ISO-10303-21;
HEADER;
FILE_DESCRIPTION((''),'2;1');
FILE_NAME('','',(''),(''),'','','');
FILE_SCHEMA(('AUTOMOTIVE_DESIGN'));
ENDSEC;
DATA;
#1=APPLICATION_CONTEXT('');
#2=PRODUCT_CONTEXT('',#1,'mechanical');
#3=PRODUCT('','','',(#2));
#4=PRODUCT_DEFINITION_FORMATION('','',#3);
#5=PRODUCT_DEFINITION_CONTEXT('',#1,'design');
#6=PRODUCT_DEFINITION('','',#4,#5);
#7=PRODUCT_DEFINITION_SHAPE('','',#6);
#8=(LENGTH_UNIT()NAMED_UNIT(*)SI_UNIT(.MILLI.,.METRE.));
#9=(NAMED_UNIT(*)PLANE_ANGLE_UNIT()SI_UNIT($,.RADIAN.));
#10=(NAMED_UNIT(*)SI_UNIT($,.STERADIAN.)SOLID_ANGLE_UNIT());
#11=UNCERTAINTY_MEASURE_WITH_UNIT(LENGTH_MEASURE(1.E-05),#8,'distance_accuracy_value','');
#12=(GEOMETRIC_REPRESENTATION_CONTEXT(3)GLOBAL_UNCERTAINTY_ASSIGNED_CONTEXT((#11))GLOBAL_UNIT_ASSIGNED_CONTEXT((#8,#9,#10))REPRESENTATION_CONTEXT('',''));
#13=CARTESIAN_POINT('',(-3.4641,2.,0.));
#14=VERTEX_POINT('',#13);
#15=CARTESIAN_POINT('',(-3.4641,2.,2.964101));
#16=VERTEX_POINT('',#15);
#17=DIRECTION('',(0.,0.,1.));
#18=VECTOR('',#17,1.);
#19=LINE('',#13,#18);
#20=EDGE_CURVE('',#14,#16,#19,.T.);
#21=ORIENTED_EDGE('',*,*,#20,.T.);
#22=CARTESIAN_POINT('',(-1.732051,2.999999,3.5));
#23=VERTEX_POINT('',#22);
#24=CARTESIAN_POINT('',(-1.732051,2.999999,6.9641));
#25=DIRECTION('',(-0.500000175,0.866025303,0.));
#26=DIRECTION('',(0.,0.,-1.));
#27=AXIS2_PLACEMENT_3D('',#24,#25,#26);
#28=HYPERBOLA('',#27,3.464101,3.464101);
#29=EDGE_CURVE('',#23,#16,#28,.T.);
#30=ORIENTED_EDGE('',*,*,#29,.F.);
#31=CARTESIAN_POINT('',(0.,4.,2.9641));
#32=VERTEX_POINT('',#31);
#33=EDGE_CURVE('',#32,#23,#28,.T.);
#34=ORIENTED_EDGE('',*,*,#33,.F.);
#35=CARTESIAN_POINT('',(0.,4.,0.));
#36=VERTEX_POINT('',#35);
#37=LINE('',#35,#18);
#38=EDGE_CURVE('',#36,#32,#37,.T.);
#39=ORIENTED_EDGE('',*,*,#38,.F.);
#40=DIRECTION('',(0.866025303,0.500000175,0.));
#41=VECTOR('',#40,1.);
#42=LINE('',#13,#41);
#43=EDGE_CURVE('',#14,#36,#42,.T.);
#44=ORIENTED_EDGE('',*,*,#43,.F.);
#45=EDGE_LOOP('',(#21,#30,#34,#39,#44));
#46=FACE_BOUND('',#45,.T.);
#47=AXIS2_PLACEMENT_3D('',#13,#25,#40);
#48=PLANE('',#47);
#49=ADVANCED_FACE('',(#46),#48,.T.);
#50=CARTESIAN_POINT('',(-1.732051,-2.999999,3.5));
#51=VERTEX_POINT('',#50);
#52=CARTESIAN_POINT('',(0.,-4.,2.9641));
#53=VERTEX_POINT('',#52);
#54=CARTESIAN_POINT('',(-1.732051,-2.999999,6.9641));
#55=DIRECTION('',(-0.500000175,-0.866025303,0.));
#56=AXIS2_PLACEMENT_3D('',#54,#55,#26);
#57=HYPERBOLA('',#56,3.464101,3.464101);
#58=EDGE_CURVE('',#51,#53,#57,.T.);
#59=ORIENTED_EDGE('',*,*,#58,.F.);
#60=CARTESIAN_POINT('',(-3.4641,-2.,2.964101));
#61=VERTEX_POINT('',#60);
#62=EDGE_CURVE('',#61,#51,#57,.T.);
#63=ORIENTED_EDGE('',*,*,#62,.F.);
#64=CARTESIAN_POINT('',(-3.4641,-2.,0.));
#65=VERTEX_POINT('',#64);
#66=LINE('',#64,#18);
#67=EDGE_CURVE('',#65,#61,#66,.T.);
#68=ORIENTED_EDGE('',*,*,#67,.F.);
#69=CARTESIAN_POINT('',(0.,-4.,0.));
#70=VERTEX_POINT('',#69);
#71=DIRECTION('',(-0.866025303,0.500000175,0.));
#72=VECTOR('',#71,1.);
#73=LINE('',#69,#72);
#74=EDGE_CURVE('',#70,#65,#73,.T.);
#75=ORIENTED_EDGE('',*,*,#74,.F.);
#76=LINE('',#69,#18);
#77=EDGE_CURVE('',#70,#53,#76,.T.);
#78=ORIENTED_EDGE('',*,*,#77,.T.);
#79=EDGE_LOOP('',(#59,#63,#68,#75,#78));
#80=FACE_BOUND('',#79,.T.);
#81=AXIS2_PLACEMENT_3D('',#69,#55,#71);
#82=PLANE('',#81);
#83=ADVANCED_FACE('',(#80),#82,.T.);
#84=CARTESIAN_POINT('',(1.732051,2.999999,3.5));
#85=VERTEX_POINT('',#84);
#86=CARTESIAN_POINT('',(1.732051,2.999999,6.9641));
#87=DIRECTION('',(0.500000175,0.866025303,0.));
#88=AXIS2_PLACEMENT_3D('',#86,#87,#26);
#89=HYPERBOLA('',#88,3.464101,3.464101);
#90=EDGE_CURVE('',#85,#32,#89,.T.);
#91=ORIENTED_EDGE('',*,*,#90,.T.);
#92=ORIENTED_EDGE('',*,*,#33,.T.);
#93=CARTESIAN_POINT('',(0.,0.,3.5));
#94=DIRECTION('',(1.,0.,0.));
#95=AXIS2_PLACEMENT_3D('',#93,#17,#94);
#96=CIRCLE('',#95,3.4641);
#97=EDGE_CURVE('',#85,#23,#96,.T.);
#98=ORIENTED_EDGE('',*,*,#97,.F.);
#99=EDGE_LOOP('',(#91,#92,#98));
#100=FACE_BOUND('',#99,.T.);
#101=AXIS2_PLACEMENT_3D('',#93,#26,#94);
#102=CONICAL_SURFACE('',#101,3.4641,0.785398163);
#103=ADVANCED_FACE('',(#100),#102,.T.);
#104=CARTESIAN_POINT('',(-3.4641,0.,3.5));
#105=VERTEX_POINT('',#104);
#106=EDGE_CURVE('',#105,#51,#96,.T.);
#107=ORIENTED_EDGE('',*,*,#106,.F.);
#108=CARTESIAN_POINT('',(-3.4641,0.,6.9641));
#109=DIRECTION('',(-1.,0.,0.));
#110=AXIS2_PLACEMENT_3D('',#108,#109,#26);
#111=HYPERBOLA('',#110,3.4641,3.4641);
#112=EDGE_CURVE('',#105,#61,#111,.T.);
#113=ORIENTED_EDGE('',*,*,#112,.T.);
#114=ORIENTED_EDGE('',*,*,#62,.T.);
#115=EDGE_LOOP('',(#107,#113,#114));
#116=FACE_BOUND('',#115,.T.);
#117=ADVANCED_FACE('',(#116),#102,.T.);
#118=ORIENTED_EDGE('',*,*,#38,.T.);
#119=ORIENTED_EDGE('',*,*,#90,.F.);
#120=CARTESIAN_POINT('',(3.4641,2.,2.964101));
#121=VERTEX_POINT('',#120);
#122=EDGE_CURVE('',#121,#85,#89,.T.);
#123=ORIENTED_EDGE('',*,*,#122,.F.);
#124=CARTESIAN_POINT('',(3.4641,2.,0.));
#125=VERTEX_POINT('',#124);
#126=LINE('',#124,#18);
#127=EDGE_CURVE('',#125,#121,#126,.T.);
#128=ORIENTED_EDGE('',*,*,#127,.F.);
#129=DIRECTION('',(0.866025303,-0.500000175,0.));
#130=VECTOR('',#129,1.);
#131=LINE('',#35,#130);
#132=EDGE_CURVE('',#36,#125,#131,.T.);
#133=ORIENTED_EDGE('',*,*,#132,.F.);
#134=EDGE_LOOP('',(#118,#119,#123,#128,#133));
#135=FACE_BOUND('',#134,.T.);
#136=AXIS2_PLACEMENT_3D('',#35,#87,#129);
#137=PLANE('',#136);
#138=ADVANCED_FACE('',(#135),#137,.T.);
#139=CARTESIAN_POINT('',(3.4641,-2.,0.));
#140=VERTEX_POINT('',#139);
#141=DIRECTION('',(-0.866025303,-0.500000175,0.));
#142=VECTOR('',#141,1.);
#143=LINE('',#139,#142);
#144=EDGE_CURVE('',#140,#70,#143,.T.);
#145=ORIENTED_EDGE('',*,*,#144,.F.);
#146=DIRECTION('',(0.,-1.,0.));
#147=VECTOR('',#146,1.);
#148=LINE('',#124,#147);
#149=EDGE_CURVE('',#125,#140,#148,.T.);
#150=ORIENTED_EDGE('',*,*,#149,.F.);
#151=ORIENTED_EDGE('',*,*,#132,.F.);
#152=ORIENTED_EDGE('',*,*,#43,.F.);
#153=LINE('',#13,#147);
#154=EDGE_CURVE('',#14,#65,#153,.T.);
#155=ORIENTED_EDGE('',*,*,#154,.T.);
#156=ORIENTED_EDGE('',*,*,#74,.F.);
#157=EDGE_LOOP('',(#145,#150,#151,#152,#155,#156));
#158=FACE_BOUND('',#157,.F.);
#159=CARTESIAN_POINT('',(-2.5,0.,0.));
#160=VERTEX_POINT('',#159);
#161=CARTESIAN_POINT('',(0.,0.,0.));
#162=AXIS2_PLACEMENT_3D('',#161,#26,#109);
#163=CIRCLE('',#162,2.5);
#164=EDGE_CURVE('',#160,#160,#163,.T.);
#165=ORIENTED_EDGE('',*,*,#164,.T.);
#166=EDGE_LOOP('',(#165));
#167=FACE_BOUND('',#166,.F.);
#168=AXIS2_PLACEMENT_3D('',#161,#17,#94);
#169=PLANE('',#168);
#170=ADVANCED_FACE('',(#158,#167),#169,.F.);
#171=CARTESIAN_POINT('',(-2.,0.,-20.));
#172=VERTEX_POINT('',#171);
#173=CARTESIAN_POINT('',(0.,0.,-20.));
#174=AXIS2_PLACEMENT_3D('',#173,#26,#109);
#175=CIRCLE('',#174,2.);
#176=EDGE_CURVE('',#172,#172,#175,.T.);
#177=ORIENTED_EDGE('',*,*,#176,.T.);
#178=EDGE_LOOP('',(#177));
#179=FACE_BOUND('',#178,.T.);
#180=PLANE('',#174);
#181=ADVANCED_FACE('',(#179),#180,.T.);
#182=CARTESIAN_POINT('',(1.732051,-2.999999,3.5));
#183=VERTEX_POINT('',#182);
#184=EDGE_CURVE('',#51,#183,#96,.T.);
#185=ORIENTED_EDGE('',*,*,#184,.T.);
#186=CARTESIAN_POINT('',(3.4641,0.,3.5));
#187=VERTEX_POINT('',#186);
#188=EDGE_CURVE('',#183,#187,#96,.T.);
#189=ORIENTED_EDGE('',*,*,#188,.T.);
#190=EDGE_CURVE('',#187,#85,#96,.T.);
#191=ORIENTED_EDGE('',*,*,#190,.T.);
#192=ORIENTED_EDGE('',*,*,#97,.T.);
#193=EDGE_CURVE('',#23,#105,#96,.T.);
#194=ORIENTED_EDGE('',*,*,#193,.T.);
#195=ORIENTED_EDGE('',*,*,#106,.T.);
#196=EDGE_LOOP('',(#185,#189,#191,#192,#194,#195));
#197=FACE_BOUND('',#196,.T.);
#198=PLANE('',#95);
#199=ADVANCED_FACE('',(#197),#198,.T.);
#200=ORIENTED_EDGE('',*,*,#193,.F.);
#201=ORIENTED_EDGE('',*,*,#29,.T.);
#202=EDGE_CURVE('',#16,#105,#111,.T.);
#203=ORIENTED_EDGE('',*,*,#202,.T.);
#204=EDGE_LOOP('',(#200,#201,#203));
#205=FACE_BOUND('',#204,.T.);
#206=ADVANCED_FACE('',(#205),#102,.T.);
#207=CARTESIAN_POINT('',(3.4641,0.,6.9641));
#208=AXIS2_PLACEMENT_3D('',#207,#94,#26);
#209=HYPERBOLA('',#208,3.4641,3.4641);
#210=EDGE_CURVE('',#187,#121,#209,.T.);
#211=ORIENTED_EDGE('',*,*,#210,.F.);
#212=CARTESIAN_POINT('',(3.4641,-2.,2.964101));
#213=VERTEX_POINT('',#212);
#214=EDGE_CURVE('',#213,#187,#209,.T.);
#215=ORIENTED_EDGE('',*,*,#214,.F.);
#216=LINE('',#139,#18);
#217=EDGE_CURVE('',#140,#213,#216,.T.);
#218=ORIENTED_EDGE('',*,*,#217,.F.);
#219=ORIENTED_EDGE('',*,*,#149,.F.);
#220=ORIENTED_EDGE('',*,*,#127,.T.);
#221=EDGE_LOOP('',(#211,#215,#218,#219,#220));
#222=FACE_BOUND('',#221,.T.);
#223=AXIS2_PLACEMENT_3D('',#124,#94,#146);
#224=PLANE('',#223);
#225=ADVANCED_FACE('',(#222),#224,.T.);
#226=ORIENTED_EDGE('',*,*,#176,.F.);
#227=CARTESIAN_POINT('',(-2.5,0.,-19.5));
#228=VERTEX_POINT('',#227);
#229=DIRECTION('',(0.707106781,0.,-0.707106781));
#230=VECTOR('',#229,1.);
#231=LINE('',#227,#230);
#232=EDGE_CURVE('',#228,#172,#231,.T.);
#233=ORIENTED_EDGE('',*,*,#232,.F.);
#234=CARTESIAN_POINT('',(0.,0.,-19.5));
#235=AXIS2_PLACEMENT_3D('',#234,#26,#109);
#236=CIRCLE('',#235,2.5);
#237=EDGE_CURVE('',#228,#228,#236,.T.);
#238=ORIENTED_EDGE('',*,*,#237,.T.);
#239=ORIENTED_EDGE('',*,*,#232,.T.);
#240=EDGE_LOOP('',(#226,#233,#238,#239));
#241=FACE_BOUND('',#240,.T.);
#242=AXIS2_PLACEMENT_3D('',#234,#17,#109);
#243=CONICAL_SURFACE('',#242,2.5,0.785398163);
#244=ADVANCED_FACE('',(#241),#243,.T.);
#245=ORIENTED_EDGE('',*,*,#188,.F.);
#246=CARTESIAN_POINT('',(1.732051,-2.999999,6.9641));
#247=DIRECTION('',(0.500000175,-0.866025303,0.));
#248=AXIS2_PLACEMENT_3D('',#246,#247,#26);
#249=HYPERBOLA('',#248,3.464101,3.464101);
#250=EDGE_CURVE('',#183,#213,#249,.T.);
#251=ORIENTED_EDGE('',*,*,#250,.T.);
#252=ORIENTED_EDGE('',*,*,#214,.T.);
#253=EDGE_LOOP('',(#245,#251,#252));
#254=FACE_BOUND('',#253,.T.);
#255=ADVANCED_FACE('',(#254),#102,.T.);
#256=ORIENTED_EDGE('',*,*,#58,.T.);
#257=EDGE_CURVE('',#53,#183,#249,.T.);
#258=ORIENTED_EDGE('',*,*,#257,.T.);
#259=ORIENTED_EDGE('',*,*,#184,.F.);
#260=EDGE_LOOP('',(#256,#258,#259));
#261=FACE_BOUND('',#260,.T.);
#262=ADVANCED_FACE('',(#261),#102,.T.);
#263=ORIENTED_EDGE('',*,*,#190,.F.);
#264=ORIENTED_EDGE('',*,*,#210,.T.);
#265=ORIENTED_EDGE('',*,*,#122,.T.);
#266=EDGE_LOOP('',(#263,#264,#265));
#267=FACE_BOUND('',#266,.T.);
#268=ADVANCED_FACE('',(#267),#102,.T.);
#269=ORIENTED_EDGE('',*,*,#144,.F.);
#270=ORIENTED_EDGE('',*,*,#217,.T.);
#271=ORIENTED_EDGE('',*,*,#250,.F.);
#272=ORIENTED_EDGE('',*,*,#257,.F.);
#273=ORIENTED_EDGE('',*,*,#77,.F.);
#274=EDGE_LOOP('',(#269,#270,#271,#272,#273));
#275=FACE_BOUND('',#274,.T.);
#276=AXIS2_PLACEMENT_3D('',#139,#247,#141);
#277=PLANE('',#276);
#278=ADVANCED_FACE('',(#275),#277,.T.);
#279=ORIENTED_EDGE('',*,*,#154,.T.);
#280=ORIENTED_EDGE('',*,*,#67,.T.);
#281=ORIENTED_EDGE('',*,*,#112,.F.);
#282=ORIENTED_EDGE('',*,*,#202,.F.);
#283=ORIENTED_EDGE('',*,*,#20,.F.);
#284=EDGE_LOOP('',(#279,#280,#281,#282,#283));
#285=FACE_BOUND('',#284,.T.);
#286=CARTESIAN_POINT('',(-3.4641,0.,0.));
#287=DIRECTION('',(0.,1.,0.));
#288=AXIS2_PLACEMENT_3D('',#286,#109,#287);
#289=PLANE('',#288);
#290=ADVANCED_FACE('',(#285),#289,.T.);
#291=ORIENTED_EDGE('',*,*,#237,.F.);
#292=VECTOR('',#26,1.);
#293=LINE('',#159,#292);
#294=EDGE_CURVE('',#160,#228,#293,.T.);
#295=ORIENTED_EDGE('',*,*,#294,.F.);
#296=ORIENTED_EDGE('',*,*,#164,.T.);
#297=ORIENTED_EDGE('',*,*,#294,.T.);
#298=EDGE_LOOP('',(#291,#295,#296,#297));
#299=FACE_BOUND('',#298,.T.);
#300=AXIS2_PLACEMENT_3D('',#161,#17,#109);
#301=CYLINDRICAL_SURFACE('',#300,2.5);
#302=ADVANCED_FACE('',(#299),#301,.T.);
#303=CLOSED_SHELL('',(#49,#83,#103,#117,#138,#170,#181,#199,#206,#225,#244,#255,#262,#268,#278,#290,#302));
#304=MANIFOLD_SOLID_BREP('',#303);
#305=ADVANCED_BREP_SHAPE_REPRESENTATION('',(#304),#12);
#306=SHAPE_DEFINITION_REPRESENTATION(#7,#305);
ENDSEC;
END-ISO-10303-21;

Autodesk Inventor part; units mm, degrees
ref_plane "YZ-Ebene" through (0, 0, 0) normal (1, 0, 0) x (0, 1, 0)
ref_plane "XZ-Ebene" through (0, 0, 0) normal (0, 1, 0) x (-1, 0, 0)
ref_plane "XY-Ebene" through (0, 0, 0) normal (0, 0, 1) x (1, 0, 0)
sketch "Skizze1" plane through (0, 0, 0) normal (0, 0, 1) x (1, 0, 0)
  line L0 (-4.8497, 0) -> (4.8497, 0) projected
  line L1 (0, -5.6) -> (0, 5.6) projected
  line L2 (0, 4) -> (3.4641, 2)
  line L3 (3.4641, 2) -> (3.4641, -2)
  line L4 (3.4641, -2) -> (0, -4)
  line L5 (0, -4) -> (-3.4641, -2)
  line L6 (-3.4641, -2) -> (-3.4641, 2)
  line L7 (-3.4641, 2) -> (0, 4)
  point P0 (0, 0)
  dimension "d9" = 8
extrude "Extrusion1" add sketch "Skizze1" along normal blind 3.5
sketch "Skizze2" plane through (0, 0, 3.5) normal (0, 0, 1) x (1, 0, 0)
  line L0 (3.4641, 2) -> (0, 4) projected
  circle A0 centre (0, 0) radius 3.4641
extrude "Extrusion2" cut sketch "Skizze2" against normal blind 3.5 draft 45 keep common part
sketch "Skizze3" plane through (0, 0, 0) normal (0, 0, -1) x (-1, 0, 0)
  circle A0 centre (0, 0) radius 2.5
  dimension "d6" = 5
extrude "Extrusion3" add sketch "Skizze3" along normal blind 20
chamfer "Fase1" distance 0.5 angle 45 1 edges at (2.5, 0, -20)
thread "Gewinde1" size "M5x0.5" class "6g" standard "ISO Metric profile" length 15
thread "Gewinde2" size "M5x0.5" class "6g" standard "ISO Metric profile" length 15
thread "Gewinde3" size "M5x0.5" class "6g" standard "ISO Metric profile" length 15.5
properties part number "Sechskantenschraube_ra8846s" material "Stahl, hochfest, niedrig legiert"
